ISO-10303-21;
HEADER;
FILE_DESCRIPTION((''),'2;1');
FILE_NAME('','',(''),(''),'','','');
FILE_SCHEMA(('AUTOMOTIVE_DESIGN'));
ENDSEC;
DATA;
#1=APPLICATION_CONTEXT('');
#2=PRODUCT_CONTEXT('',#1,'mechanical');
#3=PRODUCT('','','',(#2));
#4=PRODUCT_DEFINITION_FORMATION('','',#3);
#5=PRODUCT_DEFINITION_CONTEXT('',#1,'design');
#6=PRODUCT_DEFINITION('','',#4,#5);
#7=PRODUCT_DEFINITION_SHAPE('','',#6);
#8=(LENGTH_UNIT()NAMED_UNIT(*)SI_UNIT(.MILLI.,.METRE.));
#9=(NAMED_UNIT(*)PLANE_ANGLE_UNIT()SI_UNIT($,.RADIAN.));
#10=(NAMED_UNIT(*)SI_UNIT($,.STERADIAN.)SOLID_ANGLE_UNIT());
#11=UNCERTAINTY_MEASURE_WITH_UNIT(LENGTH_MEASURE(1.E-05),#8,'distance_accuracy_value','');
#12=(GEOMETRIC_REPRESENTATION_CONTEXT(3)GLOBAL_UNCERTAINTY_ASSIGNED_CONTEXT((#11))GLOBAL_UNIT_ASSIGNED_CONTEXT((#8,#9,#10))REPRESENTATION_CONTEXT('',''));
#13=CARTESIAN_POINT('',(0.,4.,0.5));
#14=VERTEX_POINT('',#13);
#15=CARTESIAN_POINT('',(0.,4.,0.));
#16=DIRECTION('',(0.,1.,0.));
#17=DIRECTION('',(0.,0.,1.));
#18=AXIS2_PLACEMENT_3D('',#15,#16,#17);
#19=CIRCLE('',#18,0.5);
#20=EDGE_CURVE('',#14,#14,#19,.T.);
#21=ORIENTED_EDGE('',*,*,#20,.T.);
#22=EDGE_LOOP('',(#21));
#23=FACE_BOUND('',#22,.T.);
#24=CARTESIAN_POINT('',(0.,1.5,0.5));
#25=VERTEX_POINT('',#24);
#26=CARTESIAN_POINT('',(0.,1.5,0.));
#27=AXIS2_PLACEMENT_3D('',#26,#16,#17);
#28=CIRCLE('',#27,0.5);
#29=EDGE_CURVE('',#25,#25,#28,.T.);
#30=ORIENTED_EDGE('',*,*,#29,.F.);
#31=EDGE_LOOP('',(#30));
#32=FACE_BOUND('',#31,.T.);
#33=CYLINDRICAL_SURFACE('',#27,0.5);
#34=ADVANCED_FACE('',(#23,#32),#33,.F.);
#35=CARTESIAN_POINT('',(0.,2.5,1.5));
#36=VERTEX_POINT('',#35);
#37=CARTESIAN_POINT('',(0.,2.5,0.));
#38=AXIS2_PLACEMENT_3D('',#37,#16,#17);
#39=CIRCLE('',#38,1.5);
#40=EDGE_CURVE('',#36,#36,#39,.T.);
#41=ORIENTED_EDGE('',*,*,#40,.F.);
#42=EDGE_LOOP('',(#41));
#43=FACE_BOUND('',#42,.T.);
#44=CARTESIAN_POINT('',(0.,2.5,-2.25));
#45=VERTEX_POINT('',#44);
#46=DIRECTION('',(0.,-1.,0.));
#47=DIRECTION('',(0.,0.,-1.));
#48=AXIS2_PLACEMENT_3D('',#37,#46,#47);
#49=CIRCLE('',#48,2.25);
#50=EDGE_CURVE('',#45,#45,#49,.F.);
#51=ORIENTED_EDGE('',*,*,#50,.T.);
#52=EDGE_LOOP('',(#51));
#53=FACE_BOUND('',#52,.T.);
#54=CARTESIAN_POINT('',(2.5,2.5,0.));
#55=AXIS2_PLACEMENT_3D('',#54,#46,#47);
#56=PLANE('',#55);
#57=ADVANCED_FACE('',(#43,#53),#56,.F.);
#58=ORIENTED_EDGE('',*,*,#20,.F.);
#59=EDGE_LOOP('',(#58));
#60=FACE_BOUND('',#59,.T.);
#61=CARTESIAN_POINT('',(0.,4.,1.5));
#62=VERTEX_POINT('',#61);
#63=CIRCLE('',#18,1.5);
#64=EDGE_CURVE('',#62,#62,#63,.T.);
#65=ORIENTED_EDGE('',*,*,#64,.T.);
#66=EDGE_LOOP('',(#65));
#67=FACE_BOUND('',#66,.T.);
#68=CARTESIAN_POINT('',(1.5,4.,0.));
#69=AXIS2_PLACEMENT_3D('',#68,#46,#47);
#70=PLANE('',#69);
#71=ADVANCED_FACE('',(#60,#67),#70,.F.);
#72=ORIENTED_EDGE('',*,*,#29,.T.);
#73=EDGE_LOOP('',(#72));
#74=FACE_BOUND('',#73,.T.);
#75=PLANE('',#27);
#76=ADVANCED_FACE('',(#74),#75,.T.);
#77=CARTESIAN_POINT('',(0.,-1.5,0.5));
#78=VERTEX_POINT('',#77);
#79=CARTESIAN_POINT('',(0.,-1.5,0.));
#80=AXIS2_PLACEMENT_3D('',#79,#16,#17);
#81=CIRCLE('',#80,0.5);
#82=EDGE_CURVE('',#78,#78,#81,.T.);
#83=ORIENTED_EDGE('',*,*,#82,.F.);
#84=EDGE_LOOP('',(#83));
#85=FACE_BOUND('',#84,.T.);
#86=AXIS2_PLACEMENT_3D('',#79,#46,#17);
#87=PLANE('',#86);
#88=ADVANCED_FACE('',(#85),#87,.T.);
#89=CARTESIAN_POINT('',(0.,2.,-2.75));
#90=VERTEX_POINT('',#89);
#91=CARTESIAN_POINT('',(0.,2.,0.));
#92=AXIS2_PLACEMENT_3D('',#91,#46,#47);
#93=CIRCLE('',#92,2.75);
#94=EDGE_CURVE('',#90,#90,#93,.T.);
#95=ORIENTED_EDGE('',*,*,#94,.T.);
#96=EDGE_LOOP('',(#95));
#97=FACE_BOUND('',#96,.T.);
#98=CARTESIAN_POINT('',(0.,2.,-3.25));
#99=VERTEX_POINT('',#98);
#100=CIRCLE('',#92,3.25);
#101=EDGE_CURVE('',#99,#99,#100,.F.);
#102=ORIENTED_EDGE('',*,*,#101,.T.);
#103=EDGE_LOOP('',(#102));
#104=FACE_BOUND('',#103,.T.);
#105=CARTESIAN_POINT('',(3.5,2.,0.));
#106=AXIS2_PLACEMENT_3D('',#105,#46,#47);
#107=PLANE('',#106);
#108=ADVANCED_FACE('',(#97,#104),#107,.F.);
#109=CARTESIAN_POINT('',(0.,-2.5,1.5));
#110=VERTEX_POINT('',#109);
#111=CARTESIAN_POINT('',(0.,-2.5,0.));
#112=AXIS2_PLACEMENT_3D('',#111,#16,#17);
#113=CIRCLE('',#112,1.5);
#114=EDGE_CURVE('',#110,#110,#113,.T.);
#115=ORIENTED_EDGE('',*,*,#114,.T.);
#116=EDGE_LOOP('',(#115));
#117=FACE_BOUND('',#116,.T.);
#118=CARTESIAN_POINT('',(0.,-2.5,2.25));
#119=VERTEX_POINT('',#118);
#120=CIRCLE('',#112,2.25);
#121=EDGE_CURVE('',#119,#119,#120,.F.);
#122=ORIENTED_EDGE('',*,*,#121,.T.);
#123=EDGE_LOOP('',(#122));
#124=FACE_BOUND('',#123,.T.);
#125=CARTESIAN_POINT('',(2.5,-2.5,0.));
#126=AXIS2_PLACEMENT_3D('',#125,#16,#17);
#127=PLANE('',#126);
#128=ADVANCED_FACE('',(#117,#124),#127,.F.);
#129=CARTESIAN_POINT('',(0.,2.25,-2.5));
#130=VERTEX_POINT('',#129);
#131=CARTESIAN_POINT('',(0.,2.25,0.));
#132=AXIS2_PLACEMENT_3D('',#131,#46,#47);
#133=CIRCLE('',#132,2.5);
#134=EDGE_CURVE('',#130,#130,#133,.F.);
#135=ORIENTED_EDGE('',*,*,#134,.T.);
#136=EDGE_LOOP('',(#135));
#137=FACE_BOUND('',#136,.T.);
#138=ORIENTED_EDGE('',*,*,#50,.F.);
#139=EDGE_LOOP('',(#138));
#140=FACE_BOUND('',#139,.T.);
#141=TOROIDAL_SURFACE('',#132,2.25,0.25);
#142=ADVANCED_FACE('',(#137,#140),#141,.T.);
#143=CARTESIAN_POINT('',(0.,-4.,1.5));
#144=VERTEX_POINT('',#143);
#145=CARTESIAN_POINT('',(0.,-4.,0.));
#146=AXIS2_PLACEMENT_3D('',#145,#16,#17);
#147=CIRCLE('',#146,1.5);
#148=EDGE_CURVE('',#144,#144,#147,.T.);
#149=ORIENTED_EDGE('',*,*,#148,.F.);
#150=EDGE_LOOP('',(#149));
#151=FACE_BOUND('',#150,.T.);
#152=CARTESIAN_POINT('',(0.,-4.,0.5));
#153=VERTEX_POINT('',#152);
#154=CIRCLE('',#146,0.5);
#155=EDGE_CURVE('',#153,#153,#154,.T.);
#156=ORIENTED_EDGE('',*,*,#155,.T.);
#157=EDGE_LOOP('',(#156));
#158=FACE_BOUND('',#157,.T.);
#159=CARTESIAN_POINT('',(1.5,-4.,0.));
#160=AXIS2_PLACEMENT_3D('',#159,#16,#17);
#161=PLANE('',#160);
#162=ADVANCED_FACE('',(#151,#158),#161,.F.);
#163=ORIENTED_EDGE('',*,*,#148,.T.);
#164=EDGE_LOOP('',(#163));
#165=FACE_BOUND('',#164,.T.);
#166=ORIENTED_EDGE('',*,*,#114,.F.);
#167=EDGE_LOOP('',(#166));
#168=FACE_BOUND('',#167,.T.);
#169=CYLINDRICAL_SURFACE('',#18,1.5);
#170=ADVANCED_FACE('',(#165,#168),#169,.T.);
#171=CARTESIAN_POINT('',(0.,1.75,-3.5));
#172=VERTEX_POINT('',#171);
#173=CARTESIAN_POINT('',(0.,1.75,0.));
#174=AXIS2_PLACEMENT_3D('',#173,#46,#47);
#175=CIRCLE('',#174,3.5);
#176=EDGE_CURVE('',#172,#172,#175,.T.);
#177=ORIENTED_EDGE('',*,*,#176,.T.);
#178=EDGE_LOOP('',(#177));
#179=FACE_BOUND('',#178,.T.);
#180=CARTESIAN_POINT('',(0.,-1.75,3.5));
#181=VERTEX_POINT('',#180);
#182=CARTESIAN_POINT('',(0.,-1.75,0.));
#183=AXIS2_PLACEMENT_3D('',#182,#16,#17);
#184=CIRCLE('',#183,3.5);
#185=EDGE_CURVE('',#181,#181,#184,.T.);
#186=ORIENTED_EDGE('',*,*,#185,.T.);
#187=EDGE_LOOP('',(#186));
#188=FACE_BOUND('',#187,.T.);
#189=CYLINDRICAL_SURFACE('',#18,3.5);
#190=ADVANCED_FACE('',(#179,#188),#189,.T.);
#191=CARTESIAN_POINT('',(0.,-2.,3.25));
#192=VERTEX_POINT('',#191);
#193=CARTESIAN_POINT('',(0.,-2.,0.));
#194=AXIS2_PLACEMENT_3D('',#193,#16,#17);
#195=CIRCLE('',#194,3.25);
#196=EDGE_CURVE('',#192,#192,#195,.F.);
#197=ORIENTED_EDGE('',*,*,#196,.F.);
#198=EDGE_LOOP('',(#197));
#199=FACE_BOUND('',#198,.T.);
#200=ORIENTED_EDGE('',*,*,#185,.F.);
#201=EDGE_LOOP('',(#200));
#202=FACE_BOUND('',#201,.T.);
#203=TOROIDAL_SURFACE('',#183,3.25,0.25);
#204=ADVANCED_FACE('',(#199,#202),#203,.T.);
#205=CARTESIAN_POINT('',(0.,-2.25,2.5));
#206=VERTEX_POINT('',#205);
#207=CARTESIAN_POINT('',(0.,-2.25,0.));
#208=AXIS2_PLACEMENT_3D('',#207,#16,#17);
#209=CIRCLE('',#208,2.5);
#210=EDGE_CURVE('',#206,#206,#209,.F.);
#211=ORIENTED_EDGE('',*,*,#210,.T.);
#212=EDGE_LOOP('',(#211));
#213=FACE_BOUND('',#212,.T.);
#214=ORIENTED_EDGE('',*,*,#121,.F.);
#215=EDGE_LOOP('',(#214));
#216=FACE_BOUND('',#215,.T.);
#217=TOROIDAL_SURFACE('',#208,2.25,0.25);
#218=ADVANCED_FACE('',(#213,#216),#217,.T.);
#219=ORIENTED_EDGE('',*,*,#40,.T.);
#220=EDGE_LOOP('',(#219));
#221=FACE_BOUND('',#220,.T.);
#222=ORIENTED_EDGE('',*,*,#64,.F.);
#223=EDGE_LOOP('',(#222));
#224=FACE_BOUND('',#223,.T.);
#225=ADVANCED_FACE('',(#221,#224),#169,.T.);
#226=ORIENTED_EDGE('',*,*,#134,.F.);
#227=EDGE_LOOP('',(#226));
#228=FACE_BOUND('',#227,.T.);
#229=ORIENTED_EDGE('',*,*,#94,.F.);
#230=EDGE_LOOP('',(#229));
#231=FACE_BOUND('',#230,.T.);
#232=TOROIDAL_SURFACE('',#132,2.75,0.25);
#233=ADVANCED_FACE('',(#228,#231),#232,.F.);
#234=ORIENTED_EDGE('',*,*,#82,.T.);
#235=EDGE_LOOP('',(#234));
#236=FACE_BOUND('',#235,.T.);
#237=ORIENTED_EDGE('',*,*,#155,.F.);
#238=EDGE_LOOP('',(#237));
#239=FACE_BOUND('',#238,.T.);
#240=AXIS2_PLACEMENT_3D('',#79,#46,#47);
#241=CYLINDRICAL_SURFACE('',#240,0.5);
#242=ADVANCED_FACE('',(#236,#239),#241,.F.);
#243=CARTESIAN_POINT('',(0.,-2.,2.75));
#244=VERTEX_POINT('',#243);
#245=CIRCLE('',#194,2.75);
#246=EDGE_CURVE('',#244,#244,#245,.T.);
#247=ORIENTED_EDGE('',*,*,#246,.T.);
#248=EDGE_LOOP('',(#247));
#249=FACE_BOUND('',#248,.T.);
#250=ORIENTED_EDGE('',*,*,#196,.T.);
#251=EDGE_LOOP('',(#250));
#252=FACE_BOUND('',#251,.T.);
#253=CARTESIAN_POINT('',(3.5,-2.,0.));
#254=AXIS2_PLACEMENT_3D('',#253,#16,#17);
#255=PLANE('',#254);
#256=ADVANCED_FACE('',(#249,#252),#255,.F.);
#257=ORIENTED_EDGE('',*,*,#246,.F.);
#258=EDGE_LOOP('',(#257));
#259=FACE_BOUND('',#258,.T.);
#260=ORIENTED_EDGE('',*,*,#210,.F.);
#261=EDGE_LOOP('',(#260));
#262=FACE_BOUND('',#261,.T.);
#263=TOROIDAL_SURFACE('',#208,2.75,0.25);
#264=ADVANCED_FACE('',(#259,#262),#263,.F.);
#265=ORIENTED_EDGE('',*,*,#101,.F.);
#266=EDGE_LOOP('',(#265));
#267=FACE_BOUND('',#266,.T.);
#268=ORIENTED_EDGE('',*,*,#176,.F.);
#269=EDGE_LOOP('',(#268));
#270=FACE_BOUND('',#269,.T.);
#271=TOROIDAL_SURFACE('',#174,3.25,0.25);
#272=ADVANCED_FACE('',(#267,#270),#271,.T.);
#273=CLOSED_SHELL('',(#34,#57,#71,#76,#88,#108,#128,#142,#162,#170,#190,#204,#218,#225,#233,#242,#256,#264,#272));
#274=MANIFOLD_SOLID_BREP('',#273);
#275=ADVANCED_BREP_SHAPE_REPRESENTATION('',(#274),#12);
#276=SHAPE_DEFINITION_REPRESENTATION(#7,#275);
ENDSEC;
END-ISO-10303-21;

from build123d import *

# Parameters (mm, degrees)
FILLET1_R          = 0.25
SKETCH3_R          = 0.5
CUT_EXTRUDE1_DEPTH = 2.5


with BuildPart() as part:
    # Sketch2 → Revolve1 (revolve)
    with BuildSketch(Plane.XY, mode=Mode.PRIVATE) as revolve1_sk:
        Polygon((3.5, -2), (3.5, 2), (2.5, 2), (2.5, 2.5), (1.5, 2.5), (1.5, 4), (0, 4), (0, -4), (1.5, -4), (1.5, -2.5), (2.5, -2.5), (2.5, -2), align=None)
    revolve(revolve1_sk.sketch.rotate(Axis((0, 4, 0), (0, -1, 0)), 90), axis=Axis((0, 4, 0), (0, -1, 0)))

    # Fillet1
    fillet1_edges = [part.edges().sort_by_distance(p)[0] for p in [
        (0, -2, -2.5),
        (0, -2, -3.5),
        (0, 2, -3.5),
        (0, 2, -2.5),
        (0, 2.5, -2.5),
        (0, -2.5, -2.5),
    ]]
    fillet(fillet1_edges, radius=FILLET1_R - 0.0001)  # a hair under: the kernel refuses the full size

    # Sketch3 → Cut-Extrude1 (cut)
    with BuildSketch(Plane(origin=(0, 4, 0), x_dir=(1, 0, 0), z_dir=(0, 1, 0))):
        with Locations(Location((0, 0, 0), (0, 0, 270))):
            Circle(SKETCH3_R)
    cut_extrude1 = extrude(amount=-CUT_EXTRUDE1_DEPTH, mode=Mode.SUBTRACT)

    # Mirror1: Cut-Extrude1 across plane
    add(cut_extrude1.mirror(Plane.ZX), mode=Mode.SUBTRACT)


solid = part.part
